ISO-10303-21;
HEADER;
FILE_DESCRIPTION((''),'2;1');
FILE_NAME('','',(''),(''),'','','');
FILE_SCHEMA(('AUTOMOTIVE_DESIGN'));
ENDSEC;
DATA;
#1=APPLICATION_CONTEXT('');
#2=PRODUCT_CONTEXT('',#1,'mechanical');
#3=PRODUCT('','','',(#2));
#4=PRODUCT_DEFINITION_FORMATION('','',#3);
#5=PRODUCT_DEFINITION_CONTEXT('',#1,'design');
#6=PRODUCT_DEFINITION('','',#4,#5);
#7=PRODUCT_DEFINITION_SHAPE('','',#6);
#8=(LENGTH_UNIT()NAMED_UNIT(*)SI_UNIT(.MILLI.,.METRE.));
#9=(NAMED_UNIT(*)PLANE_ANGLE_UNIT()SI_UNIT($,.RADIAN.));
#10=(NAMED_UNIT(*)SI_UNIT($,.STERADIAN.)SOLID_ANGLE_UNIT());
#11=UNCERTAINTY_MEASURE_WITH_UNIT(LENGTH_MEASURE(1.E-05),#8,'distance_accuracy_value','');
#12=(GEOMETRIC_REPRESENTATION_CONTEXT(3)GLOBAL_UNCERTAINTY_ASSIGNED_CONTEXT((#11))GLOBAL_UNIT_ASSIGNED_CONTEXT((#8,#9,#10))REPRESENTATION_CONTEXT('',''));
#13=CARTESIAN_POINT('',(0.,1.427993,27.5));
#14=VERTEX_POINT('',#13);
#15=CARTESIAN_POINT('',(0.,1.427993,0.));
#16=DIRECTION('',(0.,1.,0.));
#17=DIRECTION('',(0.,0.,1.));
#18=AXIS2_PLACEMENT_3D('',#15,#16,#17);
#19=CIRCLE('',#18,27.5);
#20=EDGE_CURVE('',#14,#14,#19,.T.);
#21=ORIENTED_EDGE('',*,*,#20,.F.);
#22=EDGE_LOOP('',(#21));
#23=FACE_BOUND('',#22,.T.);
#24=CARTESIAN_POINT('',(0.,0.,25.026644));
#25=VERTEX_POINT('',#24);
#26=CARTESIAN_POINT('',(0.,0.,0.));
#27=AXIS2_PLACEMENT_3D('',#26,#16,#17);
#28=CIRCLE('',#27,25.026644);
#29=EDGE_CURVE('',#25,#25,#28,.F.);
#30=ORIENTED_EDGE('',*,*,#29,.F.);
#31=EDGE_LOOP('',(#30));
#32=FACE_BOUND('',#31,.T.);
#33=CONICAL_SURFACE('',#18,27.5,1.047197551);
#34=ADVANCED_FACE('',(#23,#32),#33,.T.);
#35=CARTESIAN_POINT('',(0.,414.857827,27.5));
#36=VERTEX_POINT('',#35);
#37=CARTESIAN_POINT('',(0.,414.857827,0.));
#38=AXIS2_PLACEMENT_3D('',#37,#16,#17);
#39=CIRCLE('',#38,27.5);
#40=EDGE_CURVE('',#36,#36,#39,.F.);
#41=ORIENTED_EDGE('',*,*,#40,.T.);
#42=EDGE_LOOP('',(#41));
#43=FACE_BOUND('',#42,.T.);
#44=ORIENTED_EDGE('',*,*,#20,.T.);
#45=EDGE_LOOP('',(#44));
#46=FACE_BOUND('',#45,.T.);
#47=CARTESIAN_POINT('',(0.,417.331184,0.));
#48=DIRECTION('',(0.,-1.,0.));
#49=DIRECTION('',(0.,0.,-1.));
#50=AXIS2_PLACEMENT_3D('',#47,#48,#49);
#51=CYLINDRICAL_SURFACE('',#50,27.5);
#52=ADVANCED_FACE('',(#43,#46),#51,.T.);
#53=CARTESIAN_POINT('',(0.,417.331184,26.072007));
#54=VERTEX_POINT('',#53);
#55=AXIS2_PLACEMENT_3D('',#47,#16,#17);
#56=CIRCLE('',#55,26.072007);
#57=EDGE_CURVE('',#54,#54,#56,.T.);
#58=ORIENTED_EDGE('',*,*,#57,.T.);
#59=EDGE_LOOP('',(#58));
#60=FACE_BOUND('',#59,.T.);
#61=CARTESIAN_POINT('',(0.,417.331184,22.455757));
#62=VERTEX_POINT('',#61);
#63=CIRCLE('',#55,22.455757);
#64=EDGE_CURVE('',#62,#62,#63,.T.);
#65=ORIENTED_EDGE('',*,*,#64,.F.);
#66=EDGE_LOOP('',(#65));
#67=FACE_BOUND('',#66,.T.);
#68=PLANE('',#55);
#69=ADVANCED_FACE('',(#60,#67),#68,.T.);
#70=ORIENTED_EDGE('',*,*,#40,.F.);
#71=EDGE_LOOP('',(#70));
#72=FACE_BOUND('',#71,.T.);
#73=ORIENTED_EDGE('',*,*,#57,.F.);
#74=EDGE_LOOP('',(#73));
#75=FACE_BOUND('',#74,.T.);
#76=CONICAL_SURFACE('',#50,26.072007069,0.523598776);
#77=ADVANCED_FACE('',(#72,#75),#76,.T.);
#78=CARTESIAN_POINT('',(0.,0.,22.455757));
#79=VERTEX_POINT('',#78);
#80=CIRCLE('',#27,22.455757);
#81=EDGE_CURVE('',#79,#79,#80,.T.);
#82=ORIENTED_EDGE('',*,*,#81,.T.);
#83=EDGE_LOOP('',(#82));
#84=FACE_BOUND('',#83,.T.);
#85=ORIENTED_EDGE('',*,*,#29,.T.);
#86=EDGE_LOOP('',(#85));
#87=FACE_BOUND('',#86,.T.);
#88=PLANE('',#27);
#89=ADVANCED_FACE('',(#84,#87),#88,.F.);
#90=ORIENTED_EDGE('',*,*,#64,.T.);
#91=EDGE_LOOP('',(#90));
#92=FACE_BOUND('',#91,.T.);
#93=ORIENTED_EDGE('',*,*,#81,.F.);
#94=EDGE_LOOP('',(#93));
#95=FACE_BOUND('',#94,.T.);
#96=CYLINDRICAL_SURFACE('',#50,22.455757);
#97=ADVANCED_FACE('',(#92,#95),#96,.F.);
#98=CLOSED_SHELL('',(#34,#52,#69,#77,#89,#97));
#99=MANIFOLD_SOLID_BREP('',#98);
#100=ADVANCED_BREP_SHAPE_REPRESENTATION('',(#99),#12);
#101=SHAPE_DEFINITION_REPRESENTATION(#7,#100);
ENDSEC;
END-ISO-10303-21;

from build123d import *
from OCP.BRepFilletAPI import BRepFilletAPI_MakeChamfer

# Parameters (mm, degrees)
SKETCH1_R           = 27.5
BOSS_EXTRUDE1_DEPTH = 417.331183637
SKETCH2_R           = 22.455756568
CUT_EXTRUDE1_DEPTH  = 420.139376385
CHAMFER1_SIZE       = 2.473356309
CHAMFER1_SIZE2      = 1.427992931


with BuildPart() as part:
    # Sketch1 → Boss-Extrude1 (new body)
    with BuildSketch(Plane(origin=(0, 0, 0), x_dir=(1, 0, 0), z_dir=(0, 1, 0))):
        Circle(SKETCH1_R)
    extrude(amount=BOSS_EXTRUDE1_DEPTH)

    # Sketch2 → Cut-Extrude1 (cut, through all)
    with BuildSketch(Plane(origin=(0, 0, 0), x_dir=(1, 0, 0), z_dir=(0, 1, 0))):
        Circle(SKETCH2_R)
    extrude(amount=CUT_EXTRUDE1_DEPTH, mode=Mode.SUBTRACT)

    # Chamfer1: one chamfer whose edges measure the first distance from different faces: ONE call of the kernel's chamfer builder (chamfer() names one face for all edges)
    chamfer1_edges_1 = [part.edges().sort_by_distance(p)[0] for p in [
        (-27.5, 417.331183637, 0),
    ]]
    chamfer1_side_1 = [part.faces().sort_by_distance(p)[0] for p in [
        (-27.5, 208.665591819, 0),
    ]]
    chamfer1_edges_2 = [part.edges().sort_by_distance(p)[0] for p in [
        (-27.5, 0, 0),
    ]]
    chamfer1_side_2 = [part.faces().sort_by_distance(p)[0] for p in [
        (-26.722182541, 0, 0),
    ]]
    chamfer1 = BRepFilletAPI_MakeChamfer(part.part.solid().wrapped)
    for e in chamfer1_edges_1:
        chamfer1.Add(CHAMFER1_SIZE, CHAMFER1_SIZE2, e.wrapped, chamfer1_side_1[0].wrapped)  # the first distance lies on this face
    for e in chamfer1_edges_2:
        chamfer1.Add(CHAMFER1_SIZE, CHAMFER1_SIZE2, e.wrapped, chamfer1_side_2[0].wrapped)  # the first distance lies on this face
    add(Compound.cast(chamfer1.Shape()), mode=Mode.REPLACE)


solid = part.part
